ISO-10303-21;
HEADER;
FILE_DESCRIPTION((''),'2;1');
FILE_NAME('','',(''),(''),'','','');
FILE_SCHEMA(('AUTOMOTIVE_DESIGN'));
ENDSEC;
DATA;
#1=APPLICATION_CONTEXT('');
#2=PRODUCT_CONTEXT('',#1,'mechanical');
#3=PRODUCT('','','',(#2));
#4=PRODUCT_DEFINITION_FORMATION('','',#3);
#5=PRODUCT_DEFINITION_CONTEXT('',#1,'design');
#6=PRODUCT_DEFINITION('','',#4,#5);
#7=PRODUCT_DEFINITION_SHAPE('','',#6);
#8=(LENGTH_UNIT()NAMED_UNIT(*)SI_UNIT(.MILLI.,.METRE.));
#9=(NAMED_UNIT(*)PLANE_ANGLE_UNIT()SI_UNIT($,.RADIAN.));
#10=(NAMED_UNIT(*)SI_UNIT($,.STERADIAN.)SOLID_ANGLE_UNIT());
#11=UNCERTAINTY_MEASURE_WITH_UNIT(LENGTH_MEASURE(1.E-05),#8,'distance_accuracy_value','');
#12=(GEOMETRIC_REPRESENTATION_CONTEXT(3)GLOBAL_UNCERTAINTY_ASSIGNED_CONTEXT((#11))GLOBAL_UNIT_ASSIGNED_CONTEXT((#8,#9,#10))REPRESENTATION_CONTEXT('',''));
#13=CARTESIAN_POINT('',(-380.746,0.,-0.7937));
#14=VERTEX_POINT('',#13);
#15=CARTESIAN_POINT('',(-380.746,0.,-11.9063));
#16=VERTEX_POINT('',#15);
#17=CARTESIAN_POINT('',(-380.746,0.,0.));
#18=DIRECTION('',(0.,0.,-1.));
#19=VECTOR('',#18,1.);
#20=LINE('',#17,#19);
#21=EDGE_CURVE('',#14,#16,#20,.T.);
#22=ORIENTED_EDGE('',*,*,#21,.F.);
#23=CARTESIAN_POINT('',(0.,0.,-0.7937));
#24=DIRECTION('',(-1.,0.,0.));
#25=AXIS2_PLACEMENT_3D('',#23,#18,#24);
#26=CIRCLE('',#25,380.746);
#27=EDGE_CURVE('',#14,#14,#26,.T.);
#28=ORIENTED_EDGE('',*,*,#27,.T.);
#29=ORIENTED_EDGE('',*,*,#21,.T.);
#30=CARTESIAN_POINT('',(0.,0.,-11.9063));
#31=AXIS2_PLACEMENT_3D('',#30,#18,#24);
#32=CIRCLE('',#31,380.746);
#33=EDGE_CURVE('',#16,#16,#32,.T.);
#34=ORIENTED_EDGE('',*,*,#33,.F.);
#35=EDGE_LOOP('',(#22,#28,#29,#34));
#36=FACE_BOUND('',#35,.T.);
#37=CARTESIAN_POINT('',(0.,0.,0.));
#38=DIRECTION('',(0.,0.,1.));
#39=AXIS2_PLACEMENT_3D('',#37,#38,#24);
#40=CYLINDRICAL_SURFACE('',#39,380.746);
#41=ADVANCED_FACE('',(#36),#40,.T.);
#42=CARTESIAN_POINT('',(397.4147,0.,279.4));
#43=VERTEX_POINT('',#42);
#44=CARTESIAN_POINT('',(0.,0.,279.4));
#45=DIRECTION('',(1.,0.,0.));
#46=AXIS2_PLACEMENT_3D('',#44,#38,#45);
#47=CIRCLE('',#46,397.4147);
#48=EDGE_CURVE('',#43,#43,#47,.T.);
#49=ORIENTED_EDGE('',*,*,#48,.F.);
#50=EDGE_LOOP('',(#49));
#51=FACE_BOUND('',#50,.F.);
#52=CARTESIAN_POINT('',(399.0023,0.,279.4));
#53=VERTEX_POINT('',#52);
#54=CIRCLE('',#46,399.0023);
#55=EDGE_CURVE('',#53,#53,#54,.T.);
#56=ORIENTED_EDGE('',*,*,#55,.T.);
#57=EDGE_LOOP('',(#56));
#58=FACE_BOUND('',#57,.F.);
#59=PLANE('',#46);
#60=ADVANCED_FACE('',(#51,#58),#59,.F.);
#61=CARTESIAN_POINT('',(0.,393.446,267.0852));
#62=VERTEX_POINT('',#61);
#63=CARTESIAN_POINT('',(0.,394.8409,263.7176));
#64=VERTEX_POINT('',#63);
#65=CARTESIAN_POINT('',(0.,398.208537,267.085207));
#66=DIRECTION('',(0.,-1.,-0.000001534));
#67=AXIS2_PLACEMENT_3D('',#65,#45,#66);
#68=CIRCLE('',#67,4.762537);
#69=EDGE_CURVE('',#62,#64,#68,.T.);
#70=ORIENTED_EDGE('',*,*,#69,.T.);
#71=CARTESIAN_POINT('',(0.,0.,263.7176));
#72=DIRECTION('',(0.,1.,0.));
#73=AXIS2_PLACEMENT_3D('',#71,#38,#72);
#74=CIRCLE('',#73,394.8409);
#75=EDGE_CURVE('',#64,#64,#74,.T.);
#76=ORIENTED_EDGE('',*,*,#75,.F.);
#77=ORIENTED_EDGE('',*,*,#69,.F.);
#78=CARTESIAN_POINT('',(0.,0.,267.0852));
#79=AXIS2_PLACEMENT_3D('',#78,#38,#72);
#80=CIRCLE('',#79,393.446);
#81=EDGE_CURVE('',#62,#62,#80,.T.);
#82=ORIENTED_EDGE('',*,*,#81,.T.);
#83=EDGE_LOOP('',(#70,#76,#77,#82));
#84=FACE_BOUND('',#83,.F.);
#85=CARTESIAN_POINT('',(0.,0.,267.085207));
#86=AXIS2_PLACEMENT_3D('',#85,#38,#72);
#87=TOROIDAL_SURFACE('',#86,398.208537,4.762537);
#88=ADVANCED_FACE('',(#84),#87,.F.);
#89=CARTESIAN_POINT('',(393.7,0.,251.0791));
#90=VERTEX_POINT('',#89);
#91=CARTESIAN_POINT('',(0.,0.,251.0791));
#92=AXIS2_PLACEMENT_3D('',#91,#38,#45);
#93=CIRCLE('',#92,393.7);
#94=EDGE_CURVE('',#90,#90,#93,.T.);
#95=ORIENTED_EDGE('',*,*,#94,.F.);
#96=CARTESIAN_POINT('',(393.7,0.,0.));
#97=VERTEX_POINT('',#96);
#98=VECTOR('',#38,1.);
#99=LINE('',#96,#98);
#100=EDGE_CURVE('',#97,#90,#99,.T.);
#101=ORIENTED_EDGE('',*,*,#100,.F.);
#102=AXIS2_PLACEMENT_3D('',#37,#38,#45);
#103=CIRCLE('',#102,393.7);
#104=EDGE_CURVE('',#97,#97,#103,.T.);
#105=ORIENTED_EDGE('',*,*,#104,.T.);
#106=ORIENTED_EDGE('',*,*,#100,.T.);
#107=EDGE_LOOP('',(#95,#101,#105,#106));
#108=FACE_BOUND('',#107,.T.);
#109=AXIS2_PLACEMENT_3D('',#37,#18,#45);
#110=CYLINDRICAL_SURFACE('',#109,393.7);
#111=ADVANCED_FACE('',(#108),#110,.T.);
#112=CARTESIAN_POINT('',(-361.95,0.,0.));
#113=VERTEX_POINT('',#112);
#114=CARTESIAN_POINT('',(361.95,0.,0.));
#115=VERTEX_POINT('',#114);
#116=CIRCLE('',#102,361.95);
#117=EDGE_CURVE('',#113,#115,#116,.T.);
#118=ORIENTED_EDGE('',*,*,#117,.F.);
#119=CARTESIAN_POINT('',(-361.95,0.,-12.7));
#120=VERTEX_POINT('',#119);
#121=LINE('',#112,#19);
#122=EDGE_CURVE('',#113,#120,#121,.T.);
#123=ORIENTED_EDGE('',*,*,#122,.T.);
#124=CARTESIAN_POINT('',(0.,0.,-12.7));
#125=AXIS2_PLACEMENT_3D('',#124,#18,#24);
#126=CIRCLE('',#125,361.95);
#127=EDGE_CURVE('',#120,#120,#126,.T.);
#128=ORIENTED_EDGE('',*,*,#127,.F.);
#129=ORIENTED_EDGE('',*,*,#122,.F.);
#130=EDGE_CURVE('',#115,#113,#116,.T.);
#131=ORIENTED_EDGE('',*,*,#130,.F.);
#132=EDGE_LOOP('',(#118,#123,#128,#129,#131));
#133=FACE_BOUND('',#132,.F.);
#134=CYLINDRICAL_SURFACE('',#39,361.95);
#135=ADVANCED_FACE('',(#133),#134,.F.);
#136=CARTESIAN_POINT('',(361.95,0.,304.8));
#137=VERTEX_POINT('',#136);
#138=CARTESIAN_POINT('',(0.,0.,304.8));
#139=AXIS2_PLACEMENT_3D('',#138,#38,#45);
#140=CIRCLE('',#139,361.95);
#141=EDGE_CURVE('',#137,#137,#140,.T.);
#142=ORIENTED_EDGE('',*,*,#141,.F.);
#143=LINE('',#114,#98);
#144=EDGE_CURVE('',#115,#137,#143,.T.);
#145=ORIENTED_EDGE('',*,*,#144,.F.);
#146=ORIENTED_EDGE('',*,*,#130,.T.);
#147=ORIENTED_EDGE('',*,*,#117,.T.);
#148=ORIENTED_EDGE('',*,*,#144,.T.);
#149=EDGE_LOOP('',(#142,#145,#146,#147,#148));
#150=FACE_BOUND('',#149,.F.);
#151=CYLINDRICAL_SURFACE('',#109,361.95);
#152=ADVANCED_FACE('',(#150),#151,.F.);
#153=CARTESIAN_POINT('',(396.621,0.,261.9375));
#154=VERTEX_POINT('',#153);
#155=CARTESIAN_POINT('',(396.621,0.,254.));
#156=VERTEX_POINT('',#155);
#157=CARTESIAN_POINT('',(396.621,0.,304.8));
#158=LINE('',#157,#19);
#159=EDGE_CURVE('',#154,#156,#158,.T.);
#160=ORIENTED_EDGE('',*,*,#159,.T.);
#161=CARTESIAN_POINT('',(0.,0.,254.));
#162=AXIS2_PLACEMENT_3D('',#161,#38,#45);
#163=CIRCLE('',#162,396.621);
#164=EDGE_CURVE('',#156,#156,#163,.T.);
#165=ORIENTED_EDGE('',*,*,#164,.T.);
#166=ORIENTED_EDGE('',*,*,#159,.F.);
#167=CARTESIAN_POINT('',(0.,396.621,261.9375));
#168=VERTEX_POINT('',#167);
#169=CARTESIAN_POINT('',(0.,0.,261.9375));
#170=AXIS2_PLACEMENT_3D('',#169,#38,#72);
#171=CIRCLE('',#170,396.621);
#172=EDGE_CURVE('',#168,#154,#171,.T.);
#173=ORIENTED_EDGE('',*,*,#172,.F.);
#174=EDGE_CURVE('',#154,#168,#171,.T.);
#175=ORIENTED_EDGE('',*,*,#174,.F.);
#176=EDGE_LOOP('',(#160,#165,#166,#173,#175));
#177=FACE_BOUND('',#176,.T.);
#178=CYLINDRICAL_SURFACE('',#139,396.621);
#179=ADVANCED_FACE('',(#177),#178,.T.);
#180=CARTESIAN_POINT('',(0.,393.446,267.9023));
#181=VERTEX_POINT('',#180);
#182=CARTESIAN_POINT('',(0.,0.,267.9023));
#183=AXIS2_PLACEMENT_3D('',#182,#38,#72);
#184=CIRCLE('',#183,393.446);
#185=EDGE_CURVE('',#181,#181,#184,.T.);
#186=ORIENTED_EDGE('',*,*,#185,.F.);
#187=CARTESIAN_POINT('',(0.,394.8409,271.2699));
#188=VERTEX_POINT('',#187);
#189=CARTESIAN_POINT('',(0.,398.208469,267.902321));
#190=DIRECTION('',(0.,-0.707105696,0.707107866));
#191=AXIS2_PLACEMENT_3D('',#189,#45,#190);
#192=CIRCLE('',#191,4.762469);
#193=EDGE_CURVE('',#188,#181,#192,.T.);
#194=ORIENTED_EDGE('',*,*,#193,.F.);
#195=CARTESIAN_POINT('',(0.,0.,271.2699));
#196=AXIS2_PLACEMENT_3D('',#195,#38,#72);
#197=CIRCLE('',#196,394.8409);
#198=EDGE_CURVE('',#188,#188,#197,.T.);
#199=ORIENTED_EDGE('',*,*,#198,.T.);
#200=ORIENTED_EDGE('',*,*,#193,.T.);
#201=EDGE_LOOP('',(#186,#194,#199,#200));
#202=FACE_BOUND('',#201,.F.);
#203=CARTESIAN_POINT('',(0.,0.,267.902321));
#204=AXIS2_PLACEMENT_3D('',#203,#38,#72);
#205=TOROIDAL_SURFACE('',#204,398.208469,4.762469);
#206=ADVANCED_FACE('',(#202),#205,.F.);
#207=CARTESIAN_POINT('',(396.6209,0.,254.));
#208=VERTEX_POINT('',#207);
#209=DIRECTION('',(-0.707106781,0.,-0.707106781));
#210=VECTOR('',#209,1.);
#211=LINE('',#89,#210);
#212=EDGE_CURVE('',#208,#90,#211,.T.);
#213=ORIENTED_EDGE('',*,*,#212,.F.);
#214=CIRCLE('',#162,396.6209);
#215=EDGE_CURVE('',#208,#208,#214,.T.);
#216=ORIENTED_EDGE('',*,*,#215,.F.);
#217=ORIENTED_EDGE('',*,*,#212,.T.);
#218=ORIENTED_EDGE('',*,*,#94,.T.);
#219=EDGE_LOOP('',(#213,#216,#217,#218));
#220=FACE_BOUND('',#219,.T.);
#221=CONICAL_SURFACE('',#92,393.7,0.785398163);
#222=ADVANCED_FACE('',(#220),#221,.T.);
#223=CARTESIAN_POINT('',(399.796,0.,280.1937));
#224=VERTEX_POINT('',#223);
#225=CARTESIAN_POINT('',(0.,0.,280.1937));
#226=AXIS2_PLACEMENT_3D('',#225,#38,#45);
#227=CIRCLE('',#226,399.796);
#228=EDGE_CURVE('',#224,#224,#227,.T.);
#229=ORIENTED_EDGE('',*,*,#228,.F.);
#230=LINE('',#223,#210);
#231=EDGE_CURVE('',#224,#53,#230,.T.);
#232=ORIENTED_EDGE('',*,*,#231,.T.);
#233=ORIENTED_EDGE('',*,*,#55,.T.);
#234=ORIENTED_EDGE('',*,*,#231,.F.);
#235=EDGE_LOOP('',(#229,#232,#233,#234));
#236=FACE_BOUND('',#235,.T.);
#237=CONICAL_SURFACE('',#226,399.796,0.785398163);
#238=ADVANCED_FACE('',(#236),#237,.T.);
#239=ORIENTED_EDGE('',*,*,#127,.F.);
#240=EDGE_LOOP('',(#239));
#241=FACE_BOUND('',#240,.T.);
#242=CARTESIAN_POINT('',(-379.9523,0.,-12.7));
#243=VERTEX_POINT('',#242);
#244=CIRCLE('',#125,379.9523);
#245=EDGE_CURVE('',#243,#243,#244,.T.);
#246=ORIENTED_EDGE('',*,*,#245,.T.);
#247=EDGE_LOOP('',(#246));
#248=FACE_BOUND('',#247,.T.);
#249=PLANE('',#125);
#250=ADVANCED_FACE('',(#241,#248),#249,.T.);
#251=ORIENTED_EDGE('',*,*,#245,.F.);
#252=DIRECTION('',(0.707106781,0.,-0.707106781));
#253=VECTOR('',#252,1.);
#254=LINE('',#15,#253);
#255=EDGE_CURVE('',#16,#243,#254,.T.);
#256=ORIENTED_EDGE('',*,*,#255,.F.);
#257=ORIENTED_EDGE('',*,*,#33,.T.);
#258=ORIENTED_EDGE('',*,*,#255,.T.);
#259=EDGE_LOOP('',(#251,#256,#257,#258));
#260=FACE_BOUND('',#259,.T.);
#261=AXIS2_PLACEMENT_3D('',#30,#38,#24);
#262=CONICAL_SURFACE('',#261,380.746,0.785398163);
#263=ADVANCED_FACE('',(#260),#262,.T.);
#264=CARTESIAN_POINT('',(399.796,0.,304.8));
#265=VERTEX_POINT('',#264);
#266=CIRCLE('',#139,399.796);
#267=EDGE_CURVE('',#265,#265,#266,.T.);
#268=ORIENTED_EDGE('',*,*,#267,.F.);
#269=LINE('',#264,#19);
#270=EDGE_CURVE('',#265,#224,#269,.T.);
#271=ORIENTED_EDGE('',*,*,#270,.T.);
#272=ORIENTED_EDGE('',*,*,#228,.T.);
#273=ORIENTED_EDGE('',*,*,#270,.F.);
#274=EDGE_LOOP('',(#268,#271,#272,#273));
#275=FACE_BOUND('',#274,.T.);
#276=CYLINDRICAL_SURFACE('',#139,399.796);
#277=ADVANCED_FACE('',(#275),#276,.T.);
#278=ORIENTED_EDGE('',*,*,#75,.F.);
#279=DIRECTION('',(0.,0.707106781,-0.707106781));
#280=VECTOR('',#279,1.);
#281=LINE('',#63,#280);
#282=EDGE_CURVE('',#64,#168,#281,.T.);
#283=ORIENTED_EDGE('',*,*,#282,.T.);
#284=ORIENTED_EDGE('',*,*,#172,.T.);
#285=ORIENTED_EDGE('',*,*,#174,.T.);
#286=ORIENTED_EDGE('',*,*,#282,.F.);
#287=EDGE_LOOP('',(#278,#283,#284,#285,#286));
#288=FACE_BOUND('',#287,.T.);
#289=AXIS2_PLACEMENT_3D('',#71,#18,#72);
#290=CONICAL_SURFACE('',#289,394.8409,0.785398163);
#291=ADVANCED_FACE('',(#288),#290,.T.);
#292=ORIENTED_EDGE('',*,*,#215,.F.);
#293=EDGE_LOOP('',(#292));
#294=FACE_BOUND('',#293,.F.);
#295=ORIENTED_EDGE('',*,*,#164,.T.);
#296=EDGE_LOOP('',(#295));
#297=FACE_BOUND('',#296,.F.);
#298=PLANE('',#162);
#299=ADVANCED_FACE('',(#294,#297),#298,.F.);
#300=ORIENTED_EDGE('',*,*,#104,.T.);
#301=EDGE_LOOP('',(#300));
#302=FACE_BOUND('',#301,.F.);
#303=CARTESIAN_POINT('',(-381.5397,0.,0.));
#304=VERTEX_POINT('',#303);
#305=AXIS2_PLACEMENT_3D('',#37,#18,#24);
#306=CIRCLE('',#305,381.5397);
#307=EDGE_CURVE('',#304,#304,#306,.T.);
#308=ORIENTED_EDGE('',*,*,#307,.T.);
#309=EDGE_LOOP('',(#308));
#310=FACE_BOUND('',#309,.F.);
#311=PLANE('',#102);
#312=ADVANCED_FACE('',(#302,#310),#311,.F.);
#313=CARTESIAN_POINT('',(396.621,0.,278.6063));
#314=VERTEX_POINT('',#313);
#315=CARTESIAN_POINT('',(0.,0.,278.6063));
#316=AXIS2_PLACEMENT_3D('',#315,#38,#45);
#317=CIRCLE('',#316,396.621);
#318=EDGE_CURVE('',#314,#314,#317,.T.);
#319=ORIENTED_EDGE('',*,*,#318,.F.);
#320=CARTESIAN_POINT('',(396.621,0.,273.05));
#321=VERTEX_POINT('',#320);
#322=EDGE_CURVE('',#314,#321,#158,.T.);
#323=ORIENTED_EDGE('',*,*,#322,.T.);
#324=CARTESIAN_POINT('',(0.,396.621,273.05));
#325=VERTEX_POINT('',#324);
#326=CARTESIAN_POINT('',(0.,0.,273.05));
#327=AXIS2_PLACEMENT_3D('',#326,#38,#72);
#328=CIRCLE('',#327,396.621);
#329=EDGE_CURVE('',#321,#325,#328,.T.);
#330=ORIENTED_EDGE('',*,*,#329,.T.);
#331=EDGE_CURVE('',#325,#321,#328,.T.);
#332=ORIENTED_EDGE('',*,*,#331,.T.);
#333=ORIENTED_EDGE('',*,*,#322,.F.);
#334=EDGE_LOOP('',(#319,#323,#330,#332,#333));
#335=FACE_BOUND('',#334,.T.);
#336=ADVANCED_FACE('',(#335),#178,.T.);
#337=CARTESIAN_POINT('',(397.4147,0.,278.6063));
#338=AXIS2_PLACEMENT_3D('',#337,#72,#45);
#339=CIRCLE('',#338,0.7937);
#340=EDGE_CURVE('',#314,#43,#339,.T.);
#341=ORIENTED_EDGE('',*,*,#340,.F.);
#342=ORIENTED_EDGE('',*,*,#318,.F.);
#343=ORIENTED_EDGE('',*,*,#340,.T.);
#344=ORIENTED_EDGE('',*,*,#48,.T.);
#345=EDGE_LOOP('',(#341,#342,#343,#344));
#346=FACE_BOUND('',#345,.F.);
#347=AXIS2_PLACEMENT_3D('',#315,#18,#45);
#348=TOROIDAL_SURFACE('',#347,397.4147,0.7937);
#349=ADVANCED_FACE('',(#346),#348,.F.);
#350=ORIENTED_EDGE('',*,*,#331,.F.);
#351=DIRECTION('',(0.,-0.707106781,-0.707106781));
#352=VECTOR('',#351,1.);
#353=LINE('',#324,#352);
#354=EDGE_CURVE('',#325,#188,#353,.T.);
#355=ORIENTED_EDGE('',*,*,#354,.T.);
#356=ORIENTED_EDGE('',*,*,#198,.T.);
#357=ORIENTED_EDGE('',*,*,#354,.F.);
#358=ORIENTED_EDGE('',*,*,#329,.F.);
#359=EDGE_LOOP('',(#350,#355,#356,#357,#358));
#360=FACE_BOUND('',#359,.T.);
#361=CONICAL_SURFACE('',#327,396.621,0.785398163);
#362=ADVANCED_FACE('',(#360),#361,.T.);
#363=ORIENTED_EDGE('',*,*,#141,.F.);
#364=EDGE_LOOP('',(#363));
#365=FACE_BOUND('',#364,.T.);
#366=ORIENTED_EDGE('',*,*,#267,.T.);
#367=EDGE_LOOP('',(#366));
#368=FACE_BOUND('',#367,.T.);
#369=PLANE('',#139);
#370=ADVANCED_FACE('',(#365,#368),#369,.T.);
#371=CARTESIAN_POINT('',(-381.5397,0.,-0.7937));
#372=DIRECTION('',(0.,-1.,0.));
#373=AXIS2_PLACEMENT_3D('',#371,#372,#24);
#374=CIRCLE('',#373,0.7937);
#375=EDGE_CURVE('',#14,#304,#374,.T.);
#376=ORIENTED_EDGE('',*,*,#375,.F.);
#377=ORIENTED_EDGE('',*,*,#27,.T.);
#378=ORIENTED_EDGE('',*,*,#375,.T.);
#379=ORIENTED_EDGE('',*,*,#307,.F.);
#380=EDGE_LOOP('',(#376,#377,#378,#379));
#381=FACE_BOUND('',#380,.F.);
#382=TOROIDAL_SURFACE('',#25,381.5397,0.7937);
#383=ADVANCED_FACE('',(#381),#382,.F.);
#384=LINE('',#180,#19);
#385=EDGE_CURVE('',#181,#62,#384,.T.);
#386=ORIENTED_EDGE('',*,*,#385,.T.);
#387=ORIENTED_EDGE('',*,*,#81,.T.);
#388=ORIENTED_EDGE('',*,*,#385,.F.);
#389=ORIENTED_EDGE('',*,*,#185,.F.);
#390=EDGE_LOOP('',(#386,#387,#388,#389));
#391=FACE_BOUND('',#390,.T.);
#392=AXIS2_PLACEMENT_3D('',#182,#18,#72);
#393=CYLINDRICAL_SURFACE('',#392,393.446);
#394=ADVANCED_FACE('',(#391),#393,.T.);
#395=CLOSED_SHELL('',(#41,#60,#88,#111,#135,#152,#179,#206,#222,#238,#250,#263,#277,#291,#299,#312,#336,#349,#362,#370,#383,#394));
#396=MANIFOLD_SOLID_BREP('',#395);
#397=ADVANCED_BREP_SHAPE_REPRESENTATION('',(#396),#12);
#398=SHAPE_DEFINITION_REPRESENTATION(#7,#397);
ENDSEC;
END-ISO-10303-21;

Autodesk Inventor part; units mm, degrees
ref_plane "YZ Plane" through (0, 0, 0) normal (1, 0, 0) x (0, 1, 0)
ref_plane "XZ Plane" through (0, 0, 0) normal (0, 1, 0) x (-1, 0, 0)
ref_plane "XY Plane" through (0, 0, 0) normal (0, 0, 1) x (1, 0, 0)
sketch "Sketch1" plane through (0, 0, 0) normal (0, 0, 1) x (1, 0, 0)
  circle A0 centre (0, 0) radius 361.95
  circle A1 centre (0, 0) radius 393.7
  dimension "d0" = 723.9
  dimension "d1" = 787.4
extrude "Extrusion1" add sketch "Sketch1" along normal blind 304.8
sketch "Sketch2" plane through (0, 0, 304.8) normal (0, 0, 1) x (1, 0, 0)
  circle A0 centre (0, 0) radius 393.7 projected
  circle A1 centre (0, 0) radius 396.621
  circle A2 centre (0, 0) radius 399.796
  dimension "d4" = 793.242
  dimension "d5" = 799.592
extrude "Extrusion2" add sketch "Sketch2" against normal blind 50.8 contours A1
extrude "Extrusion3" add sketch "Sketch2" against normal blind 25.4 contours A2
chamfer "Chamfer1" distance 2.921 angle 45 1 edges at (-393.7, 0, 254)
sketch "Sketch3" plane through (0, 0, 0) normal (0, 0, -1) x (-1, 0, 0)
  circle A0 centre (0, 0) radius 380.746
  circle A1 centre (0, 0) radius 361.95 projected
  dimension "d13" = 761.492
extrude "Extrusion4" add sketch "Sketch3" along normal blind 12.7
fillet "Fillet1" radius 0.7937 2 edges at (380.746, 0, 0) (-396.621, 0, 279.4)
chamfer "Chamfer2" distance 0.7937 angle 45 1 edges at (380.746, 0, -12.7)
chamfer "Chamfer3" distance 0.7937 angle 45 1 edges at (-399.796, 0, 279.4)
sketch "Sketch4" plane through (0, 0, 0) normal (1, 0, 0) x (0, 1, 0)
  line L0 (396.621, 278.6062) -> (396.621, 254) construction
  line L1 (-399.796, 304.8) -> (399.796, 304.8) construction
  line L2 (396.621, 273.05) -> (394.8409, 271.2699)
  arc A0 (394.8409, 271.2699) -> (393.446, 267.9023) centre (398.2085, 267.9023) ccw
  line L3 (393.446, 267.9023) -> (393.446, 267.0852)
  arc A1 (393.446, 267.0852) -> (394.8409, 263.7176) centre (398.2085, 267.0852) ccw
  line L4 (394.8409, 263.7176) -> (396.621, 261.9375)
  line L5 (396.621, 261.9375) -> (396.621, 273.05)
  line L6 (0, -60.96) -> (0, 365.76) projected
  point P0 (0, 0)
  dimension "d23" = 11.1125
  dimension "d24" = 3.175
  dimension "d25" = 4.7625
  dimension "d26" = 31.75
  dimension "d27" = 45
revolve "Revolution1" cut sketch "Sketch4" angle 360 about axis through (0, 0, -10) along (0, 0, 1)
equation "\"d10\" = -0.5 * d1 + 0.5 * d4"
properties part number "A1-19037-200-06 HCWI liner - pup" material "Iron, HCWI"
